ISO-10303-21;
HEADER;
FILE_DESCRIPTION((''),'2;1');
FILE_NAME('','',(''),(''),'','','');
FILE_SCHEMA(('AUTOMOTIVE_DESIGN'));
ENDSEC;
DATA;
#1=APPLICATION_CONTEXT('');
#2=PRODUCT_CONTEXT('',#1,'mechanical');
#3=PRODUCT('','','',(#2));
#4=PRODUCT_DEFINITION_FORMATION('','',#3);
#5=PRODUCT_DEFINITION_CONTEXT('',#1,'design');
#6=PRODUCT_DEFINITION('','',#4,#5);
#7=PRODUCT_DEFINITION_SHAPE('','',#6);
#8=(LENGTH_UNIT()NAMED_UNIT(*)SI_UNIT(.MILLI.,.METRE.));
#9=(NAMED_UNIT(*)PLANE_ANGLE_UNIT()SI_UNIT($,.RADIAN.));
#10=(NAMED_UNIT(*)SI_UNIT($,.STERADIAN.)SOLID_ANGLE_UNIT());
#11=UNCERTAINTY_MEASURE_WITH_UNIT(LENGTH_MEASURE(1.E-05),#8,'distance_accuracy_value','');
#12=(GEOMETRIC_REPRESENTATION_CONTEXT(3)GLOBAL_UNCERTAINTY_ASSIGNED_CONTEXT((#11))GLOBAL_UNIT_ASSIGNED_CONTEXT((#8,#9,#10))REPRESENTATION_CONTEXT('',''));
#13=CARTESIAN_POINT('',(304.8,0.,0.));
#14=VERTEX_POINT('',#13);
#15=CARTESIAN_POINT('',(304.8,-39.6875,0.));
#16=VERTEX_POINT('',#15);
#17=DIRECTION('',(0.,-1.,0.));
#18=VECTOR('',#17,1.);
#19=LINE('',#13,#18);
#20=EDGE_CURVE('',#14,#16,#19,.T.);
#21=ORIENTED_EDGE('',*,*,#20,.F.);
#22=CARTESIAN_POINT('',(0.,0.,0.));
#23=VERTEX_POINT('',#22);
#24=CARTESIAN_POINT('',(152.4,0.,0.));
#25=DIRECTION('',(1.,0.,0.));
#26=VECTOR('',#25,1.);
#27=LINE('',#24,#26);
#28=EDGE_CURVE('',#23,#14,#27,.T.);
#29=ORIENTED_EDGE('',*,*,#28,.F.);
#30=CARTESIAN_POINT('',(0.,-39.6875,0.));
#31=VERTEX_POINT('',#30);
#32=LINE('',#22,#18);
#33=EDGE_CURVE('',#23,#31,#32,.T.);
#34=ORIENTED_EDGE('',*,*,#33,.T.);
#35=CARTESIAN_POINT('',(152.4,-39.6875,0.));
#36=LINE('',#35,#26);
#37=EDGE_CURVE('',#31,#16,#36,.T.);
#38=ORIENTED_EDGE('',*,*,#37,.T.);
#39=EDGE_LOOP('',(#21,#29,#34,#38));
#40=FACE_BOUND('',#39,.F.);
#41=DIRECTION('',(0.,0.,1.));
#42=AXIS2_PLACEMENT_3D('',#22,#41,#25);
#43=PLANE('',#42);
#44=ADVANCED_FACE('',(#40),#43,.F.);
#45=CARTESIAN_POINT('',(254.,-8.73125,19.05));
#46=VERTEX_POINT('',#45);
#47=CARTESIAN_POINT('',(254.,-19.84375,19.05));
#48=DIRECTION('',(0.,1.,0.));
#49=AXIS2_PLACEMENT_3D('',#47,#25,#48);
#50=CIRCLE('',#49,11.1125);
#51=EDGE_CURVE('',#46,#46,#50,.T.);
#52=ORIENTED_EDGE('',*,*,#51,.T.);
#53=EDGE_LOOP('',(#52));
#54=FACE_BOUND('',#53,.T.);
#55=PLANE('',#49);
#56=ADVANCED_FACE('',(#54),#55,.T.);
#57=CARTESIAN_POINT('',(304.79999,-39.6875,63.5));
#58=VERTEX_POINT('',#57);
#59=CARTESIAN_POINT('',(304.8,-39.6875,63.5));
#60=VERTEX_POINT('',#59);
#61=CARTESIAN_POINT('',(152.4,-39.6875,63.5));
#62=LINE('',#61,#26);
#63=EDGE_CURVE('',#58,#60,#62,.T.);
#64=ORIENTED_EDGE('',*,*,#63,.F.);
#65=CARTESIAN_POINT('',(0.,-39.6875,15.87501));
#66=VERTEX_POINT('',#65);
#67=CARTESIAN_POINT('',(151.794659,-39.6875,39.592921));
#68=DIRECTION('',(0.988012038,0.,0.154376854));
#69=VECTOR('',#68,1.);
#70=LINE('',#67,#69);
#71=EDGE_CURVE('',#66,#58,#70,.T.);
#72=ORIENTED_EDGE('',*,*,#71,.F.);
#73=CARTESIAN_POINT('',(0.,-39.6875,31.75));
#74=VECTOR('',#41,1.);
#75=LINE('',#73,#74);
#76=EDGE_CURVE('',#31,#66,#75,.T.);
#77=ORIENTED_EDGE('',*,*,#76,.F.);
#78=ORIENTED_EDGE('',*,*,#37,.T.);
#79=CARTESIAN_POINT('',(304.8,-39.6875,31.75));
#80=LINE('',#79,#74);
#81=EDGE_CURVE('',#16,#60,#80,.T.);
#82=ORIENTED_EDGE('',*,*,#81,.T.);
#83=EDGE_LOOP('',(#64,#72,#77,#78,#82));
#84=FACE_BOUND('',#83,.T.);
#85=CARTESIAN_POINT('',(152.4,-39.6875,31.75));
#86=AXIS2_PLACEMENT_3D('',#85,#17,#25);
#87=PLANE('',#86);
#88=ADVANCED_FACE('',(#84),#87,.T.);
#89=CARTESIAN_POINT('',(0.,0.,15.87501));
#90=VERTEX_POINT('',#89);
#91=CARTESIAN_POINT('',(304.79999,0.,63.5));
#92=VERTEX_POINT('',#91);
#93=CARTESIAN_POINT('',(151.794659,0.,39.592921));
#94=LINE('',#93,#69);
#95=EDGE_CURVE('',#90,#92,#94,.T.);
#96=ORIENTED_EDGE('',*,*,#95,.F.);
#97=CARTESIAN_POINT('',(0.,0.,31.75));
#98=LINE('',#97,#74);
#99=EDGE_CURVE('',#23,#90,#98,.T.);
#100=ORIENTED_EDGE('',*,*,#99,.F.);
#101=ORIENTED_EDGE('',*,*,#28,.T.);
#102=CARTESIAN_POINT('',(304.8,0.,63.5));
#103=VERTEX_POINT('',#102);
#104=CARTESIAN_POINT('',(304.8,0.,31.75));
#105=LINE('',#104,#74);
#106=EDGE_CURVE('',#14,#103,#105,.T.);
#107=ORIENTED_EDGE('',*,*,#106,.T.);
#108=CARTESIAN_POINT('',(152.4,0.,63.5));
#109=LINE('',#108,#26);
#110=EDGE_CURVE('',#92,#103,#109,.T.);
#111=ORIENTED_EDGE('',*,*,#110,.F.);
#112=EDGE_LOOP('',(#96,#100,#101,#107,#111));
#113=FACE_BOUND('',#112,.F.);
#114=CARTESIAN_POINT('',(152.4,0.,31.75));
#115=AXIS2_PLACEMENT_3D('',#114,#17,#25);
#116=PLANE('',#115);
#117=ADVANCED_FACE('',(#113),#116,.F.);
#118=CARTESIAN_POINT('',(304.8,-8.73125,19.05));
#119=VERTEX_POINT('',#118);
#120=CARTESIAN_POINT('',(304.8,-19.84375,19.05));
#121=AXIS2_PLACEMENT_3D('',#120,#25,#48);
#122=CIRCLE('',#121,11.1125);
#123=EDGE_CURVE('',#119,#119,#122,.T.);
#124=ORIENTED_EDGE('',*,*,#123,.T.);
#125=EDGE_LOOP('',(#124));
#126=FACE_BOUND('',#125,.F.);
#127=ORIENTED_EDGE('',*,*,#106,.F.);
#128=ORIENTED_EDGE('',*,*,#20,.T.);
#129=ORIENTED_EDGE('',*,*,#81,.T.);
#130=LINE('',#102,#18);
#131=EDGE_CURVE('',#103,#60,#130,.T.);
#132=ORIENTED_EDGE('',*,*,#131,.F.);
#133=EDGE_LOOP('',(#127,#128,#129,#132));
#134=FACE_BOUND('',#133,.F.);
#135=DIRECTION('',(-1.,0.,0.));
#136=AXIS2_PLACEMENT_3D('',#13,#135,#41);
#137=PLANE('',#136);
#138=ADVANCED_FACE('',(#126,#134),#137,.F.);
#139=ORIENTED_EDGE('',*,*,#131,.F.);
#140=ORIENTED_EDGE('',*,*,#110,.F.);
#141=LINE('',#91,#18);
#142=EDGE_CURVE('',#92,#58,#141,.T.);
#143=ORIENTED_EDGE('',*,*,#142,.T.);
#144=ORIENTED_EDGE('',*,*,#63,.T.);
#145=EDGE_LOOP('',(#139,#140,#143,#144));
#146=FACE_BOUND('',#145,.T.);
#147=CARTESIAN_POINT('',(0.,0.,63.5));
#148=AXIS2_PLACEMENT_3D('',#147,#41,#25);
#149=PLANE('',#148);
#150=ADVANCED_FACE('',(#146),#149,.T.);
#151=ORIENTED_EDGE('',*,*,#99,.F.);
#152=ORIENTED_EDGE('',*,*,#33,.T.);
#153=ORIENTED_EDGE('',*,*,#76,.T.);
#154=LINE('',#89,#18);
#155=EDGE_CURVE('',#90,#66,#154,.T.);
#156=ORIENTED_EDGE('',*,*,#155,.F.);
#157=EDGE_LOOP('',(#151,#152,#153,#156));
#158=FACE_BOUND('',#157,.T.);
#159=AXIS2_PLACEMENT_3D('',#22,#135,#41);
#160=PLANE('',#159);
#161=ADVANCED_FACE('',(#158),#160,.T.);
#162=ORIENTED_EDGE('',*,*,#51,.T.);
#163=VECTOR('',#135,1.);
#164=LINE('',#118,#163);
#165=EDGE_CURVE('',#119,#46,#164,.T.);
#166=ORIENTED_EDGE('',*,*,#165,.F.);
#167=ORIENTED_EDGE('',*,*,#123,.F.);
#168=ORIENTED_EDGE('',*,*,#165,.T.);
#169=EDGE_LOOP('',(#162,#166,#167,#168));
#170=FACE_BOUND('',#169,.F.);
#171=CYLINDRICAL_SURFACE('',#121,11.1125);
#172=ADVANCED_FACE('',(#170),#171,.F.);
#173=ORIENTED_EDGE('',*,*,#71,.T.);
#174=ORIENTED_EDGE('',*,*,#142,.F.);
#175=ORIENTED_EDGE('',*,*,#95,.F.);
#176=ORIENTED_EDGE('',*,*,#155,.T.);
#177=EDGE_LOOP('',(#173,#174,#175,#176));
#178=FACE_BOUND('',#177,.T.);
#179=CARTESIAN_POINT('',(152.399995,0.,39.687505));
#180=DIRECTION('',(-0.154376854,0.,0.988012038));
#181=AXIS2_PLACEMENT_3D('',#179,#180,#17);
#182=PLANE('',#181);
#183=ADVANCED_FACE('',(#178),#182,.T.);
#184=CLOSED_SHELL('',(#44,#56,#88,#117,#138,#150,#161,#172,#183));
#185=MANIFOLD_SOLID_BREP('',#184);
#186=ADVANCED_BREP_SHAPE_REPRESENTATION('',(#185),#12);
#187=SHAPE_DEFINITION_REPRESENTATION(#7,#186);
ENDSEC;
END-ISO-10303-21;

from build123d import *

# Parameters (mm, degrees)
F0_W     = 304.8
F0_H     = 63.5
F1_DEPTH = 39.6875
F2_SIZE2 = 304.79999
F2_SIZE  = 47.62499
F3_R     = 11.1125
F4_DEPTH = 50.8


# Not quite as in the source:
# - a fillet or chamfer is up to 0.001 mm smaller than in the source, because OpenCascade refuses the exact size
# - a length typed as a fraction of an inch, garbled in the dataset ("3 / 203.2 mm" for 3/8 in), is restored


with BuildPart() as f1:
    # F0 (on Front) → F1 (new body)
    with BuildSketch(Plane.XZ):
        with Locations((152.4, 31.75)):
            Rectangle(F0_W, F0_H)
    extrude(amount=F1_DEPTH)

    # F2 (size 47.625 and 304.8 in the source; OpenCascade refuses exactly that, so slightly less here)
    f2_edges = [f1.edges().sort_by_distance(p)[0] for p in [
        (0, -19.84375, 63.5),
    ]]
    f2_side = f1.faces().sort_by_distance((0, -19.84375, 31.75))[0]
    chamfer(f2_edges, length=F2_SIZE, length2=F2_SIZE2, reference=f2_side)

    # F3 (on face) → F4 (cut)
    with BuildSketch(Plane.YZ.offset(304.8)):
        with Locations((-19.84375, 19.05)):
            Circle(F3_R)
    extrude(amount=-F4_DEPTH, mode=Mode.SUBTRACT)


solid = f1.part
